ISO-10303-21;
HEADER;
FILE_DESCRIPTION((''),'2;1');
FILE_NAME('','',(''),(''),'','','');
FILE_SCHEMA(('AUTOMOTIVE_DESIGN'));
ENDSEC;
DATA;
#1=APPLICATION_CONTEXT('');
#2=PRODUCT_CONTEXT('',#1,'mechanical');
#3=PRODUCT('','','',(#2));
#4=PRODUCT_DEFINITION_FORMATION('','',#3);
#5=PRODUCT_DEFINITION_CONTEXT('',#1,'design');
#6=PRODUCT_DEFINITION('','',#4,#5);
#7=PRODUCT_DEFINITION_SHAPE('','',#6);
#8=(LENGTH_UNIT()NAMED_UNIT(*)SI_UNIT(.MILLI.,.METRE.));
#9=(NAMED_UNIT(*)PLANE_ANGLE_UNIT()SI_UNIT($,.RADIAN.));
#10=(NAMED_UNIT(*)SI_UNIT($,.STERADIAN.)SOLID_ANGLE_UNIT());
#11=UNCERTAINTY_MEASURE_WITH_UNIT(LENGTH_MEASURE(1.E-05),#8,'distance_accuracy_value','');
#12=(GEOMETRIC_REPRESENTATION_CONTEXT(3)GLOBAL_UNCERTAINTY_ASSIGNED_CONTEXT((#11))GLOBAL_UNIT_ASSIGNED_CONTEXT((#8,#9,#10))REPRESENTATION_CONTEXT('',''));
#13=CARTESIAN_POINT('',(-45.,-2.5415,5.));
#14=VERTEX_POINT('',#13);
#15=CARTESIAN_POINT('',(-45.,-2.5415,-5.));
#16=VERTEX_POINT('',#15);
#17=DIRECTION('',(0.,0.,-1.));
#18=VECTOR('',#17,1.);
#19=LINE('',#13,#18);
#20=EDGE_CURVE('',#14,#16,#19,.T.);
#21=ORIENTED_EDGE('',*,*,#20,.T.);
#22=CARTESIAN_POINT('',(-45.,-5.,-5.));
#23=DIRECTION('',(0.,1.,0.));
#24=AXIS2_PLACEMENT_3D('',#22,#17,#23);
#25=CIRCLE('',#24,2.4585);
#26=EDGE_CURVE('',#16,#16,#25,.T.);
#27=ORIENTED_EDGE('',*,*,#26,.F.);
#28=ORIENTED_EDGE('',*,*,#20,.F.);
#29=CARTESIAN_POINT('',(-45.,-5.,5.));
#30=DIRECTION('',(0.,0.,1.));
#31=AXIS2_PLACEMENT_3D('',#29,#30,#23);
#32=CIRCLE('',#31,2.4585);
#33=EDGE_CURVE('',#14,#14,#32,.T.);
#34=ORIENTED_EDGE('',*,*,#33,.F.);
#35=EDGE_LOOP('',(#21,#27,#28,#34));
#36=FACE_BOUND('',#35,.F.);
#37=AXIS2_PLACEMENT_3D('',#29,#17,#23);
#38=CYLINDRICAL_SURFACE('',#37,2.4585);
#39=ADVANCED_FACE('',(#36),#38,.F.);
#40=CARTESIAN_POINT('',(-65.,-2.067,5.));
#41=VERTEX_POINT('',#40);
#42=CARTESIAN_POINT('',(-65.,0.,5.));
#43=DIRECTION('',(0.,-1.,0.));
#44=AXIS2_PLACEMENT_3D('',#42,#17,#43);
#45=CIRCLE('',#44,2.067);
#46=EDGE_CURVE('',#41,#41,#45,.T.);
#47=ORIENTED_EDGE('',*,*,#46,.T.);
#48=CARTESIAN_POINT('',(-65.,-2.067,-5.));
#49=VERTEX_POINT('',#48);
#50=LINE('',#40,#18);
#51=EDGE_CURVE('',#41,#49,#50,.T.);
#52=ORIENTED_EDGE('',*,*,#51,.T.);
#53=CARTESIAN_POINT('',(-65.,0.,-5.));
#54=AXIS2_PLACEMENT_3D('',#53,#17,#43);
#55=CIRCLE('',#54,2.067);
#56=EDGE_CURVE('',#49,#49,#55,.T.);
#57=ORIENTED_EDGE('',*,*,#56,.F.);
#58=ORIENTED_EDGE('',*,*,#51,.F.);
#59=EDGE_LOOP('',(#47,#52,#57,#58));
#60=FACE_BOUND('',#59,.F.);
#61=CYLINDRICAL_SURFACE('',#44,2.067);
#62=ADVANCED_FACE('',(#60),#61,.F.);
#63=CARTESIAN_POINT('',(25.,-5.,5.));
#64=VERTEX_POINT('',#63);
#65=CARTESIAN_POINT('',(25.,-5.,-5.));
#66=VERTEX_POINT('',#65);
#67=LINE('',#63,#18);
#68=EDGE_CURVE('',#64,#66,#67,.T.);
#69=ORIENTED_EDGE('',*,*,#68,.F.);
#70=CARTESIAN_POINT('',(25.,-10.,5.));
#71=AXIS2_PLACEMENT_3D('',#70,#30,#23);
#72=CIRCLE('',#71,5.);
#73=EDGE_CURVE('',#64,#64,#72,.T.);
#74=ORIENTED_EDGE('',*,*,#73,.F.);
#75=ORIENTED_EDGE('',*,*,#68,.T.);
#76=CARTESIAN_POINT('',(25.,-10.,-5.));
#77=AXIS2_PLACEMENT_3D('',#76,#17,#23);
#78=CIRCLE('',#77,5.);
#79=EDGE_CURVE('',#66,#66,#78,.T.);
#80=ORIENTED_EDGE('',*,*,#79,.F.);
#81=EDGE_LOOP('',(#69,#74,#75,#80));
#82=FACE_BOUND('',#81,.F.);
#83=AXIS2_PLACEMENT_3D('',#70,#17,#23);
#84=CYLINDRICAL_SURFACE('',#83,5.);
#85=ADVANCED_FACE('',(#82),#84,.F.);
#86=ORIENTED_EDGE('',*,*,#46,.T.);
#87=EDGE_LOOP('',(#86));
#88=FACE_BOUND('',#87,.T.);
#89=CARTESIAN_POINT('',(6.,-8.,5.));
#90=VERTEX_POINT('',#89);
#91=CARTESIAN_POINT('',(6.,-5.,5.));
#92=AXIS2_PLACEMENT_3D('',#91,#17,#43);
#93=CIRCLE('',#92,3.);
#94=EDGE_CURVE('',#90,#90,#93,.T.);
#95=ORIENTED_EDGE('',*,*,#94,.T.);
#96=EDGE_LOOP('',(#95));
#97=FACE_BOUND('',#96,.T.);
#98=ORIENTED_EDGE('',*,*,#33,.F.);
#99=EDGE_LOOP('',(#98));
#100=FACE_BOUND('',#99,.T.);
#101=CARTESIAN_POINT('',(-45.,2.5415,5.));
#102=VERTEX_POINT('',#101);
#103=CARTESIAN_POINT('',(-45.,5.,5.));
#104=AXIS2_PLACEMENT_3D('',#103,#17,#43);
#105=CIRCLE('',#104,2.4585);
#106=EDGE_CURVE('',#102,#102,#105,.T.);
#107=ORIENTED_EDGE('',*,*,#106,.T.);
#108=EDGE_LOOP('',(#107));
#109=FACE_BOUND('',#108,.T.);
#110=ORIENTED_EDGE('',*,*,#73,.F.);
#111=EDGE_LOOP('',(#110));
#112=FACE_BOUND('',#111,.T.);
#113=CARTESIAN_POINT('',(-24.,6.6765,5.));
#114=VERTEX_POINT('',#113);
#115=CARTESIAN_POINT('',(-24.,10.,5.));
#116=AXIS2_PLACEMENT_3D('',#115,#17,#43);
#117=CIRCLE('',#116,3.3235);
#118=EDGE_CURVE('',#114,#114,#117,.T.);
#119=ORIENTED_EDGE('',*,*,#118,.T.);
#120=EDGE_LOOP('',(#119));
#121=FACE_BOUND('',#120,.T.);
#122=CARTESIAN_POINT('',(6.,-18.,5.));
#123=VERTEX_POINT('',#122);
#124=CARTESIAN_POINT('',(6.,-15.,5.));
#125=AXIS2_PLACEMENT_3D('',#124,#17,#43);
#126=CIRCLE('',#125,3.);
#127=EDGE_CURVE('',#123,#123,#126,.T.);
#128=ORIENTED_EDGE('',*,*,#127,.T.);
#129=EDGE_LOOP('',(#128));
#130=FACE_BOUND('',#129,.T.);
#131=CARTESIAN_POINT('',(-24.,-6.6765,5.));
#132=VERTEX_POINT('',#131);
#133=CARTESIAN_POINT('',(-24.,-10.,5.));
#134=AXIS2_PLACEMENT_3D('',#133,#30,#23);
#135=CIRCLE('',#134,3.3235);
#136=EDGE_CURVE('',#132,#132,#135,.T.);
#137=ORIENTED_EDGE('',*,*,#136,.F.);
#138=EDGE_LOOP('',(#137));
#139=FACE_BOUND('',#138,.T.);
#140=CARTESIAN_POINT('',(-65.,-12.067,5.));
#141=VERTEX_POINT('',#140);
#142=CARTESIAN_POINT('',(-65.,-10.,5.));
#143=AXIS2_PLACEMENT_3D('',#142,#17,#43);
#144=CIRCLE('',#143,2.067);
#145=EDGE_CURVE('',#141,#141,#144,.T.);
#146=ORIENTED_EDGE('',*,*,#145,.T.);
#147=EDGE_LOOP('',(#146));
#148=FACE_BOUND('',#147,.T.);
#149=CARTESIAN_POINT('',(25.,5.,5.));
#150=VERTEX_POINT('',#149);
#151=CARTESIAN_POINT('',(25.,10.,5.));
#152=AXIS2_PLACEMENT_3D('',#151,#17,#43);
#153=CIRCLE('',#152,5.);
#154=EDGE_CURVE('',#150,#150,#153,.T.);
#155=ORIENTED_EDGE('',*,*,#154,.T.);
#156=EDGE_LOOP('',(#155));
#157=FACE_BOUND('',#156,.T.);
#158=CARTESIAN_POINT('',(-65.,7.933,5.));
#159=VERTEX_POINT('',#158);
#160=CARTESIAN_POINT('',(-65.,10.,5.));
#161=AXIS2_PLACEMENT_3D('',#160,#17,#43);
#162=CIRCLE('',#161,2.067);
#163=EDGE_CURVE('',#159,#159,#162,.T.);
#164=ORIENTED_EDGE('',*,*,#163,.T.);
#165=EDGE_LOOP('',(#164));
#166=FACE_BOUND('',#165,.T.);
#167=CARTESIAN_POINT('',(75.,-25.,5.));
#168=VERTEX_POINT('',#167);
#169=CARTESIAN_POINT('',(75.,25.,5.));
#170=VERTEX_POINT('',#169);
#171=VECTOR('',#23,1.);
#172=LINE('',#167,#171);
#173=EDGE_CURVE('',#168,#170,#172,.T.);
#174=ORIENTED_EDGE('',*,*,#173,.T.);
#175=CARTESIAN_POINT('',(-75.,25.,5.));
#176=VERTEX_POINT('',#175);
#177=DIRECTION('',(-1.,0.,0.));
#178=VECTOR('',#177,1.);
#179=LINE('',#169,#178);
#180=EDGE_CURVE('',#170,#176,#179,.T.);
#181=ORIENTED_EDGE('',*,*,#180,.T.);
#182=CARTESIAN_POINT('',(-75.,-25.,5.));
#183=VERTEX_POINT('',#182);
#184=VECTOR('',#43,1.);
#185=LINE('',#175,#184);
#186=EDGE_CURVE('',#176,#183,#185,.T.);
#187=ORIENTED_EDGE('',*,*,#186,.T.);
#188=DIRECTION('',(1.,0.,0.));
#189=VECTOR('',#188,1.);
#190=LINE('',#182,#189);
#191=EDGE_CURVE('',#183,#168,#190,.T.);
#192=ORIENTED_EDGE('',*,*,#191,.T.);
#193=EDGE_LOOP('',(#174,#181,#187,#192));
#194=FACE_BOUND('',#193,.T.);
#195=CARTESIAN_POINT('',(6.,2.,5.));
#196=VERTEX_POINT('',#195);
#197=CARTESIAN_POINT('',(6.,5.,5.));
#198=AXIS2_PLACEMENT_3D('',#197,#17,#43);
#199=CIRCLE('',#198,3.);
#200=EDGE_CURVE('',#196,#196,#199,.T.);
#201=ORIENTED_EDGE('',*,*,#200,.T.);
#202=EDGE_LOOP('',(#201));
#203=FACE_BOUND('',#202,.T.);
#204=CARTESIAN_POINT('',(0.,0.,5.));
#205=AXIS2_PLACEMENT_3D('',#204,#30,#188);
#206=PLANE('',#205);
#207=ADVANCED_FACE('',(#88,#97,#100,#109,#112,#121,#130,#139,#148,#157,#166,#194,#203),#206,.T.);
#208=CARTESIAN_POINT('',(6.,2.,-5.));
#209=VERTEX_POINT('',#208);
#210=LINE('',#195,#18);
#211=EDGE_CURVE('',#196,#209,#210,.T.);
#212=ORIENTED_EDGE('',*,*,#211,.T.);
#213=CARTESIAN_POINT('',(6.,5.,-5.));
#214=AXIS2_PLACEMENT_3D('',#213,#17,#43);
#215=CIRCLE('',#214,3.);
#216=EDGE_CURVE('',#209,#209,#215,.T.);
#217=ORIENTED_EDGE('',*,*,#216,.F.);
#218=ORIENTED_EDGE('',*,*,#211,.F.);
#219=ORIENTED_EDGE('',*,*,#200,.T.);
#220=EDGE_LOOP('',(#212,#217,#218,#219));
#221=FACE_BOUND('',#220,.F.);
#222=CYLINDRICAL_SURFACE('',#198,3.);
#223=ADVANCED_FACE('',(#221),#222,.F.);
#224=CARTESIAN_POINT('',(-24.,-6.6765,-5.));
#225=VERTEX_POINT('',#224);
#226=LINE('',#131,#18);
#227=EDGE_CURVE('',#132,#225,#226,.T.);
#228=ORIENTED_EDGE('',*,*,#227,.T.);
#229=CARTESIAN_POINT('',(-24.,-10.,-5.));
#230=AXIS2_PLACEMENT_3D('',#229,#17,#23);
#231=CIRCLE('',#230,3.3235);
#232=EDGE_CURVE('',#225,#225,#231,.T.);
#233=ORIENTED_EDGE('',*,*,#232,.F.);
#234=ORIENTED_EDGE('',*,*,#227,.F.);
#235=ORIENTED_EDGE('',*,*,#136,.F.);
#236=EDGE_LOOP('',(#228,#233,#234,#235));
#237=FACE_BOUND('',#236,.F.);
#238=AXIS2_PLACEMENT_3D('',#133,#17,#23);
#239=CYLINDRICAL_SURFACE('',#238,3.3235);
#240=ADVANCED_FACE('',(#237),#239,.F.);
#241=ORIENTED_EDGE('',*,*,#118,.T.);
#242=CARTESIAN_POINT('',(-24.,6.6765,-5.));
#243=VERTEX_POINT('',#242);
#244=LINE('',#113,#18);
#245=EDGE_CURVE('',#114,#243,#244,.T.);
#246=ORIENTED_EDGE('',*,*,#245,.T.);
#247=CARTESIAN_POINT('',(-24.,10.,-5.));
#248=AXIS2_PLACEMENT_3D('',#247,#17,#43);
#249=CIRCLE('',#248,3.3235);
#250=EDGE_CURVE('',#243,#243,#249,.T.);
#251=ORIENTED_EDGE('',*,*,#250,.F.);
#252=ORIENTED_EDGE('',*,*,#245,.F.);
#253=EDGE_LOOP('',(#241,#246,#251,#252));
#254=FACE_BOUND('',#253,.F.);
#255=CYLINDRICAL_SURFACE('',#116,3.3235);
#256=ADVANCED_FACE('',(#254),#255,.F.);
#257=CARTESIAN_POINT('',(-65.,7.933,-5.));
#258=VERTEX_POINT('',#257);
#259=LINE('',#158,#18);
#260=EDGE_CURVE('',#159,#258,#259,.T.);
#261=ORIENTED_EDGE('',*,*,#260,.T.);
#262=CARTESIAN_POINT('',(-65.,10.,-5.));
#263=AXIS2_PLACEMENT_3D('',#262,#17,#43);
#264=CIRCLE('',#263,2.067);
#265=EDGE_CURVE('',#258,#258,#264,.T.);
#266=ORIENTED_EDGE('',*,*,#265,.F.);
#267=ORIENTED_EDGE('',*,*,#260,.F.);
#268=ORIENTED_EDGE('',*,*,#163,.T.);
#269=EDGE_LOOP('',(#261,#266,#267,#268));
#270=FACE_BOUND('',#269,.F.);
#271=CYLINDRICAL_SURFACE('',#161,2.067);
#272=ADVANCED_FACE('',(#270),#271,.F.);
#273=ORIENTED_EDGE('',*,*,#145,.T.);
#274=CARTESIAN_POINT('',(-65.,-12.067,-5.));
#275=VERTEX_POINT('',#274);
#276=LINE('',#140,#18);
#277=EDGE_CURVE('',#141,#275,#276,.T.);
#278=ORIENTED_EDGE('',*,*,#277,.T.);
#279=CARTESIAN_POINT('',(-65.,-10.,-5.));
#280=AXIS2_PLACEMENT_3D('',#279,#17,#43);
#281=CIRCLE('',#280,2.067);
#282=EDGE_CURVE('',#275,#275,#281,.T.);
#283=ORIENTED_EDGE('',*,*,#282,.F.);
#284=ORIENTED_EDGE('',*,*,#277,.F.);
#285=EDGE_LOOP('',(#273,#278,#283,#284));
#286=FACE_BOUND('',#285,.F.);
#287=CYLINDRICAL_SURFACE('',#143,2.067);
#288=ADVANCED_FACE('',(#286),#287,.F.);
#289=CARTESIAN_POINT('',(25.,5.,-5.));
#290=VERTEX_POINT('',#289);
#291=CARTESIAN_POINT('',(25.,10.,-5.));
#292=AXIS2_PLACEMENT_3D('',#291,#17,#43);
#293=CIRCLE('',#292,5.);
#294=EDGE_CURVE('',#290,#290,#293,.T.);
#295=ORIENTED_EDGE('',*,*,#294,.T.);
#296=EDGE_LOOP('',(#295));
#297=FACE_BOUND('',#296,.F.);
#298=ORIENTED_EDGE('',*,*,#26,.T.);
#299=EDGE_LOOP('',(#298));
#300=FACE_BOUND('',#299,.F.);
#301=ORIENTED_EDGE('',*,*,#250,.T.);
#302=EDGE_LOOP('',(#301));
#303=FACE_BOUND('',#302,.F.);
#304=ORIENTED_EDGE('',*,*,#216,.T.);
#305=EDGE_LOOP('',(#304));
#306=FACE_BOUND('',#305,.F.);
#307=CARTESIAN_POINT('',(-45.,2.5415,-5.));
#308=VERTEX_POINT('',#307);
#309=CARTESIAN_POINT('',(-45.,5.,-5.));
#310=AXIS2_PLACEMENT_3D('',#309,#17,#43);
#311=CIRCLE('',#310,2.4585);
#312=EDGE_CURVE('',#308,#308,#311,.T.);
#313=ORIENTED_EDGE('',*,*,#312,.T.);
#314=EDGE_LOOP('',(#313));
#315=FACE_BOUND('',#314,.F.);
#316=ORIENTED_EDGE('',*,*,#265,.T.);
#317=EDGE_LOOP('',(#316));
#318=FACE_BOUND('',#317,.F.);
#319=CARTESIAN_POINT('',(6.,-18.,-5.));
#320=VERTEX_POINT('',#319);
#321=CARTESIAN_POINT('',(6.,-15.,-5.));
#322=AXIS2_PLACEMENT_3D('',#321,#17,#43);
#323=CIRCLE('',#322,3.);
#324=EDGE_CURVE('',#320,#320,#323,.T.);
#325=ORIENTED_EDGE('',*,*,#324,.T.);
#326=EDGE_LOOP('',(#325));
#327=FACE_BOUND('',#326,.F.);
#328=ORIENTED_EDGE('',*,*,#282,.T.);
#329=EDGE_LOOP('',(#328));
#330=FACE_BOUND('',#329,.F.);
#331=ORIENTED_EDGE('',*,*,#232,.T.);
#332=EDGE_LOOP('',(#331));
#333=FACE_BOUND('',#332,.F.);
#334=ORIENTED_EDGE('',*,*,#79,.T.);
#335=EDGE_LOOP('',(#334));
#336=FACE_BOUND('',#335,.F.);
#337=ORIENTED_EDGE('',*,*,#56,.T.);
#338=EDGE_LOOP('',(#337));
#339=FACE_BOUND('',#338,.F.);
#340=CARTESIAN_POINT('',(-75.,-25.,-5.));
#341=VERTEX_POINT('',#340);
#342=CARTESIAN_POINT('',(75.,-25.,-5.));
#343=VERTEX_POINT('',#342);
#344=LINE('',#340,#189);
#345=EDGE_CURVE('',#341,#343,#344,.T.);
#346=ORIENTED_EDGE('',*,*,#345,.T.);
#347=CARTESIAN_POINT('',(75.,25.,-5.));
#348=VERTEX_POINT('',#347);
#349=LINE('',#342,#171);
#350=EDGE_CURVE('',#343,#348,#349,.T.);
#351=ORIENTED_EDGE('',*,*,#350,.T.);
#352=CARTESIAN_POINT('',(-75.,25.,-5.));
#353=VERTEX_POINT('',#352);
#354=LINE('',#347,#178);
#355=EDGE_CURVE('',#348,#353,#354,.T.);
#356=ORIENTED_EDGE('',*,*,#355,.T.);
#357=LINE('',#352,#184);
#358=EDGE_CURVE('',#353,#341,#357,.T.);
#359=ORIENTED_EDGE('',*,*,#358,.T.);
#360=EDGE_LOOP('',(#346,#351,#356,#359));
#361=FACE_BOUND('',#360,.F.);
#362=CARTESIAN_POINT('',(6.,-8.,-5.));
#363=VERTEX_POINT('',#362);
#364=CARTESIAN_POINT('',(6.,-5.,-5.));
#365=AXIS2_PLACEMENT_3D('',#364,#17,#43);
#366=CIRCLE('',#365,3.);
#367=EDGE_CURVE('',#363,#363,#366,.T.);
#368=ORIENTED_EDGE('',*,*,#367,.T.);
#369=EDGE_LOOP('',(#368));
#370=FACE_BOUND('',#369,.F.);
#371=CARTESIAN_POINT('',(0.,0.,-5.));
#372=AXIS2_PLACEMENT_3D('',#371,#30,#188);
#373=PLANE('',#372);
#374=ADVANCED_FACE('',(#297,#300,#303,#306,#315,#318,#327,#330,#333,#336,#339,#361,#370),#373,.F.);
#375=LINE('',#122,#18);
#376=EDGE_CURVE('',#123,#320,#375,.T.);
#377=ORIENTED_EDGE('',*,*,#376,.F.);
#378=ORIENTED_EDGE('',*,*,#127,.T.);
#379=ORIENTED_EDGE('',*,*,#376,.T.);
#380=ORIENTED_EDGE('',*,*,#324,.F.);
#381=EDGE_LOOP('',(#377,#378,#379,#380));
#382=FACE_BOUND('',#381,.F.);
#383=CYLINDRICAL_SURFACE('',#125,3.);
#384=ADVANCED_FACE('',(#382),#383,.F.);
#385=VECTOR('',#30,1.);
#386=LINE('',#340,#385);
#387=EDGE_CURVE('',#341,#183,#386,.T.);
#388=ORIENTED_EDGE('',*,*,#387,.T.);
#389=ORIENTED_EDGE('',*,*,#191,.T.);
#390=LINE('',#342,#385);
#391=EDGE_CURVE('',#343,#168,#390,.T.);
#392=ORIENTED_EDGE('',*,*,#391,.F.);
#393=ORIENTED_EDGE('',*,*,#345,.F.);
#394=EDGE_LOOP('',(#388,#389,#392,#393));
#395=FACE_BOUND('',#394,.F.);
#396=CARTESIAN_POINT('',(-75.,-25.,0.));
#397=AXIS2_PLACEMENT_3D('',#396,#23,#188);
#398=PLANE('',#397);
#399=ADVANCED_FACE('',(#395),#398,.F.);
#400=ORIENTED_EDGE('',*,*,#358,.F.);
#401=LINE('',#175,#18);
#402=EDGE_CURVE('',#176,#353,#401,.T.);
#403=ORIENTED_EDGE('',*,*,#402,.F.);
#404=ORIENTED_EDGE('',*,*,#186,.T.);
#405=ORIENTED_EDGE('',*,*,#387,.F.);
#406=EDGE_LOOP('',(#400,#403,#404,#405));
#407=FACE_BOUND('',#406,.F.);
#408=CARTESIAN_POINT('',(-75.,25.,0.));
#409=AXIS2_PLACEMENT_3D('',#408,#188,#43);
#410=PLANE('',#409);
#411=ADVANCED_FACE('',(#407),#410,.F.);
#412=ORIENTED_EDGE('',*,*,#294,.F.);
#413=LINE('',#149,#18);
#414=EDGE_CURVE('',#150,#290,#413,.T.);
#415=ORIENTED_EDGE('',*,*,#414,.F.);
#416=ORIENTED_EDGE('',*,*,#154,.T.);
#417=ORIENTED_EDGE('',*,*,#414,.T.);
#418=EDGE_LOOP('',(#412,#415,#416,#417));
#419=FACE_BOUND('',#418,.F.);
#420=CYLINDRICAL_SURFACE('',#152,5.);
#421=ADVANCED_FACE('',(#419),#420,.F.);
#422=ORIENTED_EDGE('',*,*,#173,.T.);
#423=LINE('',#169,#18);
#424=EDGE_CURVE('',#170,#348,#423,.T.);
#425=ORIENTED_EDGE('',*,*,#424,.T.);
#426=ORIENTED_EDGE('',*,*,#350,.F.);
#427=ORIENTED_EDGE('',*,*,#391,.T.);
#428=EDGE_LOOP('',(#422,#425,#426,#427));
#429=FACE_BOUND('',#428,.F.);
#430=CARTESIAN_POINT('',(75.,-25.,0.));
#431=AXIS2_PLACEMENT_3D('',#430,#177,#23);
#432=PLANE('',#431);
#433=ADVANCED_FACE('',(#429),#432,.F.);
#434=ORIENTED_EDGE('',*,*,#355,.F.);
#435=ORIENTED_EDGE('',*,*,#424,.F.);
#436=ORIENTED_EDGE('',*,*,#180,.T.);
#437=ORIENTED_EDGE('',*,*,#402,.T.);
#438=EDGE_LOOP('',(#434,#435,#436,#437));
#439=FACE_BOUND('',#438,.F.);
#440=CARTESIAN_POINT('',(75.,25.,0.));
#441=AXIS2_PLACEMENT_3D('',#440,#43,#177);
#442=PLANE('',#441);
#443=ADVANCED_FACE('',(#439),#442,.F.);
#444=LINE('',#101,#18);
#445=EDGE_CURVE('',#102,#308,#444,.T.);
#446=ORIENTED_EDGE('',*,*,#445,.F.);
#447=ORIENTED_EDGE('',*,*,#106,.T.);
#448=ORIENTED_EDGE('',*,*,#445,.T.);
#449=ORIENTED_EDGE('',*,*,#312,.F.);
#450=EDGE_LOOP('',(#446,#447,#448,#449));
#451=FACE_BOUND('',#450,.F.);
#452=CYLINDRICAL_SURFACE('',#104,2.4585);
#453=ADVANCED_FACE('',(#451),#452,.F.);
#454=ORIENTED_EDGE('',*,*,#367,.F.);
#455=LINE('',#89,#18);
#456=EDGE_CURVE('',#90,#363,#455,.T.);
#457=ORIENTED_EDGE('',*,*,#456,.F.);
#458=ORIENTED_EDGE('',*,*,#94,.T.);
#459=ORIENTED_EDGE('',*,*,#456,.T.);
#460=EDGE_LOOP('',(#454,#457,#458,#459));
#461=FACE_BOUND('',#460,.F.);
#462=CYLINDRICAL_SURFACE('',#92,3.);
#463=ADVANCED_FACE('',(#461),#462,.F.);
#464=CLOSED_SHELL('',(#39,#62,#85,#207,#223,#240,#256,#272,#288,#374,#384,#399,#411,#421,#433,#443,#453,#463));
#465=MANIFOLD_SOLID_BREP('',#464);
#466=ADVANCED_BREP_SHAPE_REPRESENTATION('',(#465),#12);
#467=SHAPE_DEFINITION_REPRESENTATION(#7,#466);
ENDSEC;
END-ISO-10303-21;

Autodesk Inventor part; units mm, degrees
ref_plane "YZ Plane" through (0, 0, 0) normal (1, 0, 0) x (0, 1, 0)
ref_plane "XZ Plane" through (0, 0, 0) normal (0, 1, 0) x (-1, 0, 0)
ref_plane "XY Plane" through (0, 0, 0) normal (0, 0, 1) x (1, 0, 0)
sketch "Sketch2" plane through (0, 0, 0) normal (0, 0, 1) x (1, 0, 0)
  line L0 (-75, -25) -> (75, -25)
  line L1 (75, -25) -> (75, 25)
  line L2 (75, 25) -> (-75, 25)
  line L3 (-75, 25) -> (-75, -25)
  line L4 (-75, -25) -> (75, 25) construction
  line L5 (75, -25) -> (-75, 25) construction
  point P0 (0, 0)
  dimension "d1" = 150
  dimension "d2" = 50
extrude "Extrusion1" add sketch "Sketch2" along normal mid plane 10
sketch "Sketch3" plane through (0, 0, 5) normal (0, 0, 1) x (1, 0, 0)
  line L0 (-75, 25) -> (-75, -25) projected
  line L1 (75, 25) -> (-75, 25) projected
  point P0 (0, 0)
  point P1 (-65, 0)
  dimension "d40" = 10
  dimension "d43" = 25
hole "Hole1" at (-65, 0, 5) direction (0, 0, -1) diameter 4.134 depth 14.2 tip angle 118 thread size "M5x0.8" class "6H" standard "TS profile"
sketch "Sketch4" plane through (0, 0, 5) normal (0, 0, 1) x (1, 0, 0)
  line L0 (-75, 25) -> (-75, -25) projected
  line L1 (75, 25) -> (-75, 25) projected
  point P0 (0, 0)
  point P1 (-45, 5)
  dimension "d41" = 30
  dimension "d42" = 20
hole "Hole2" at (-45, 5, 5) direction (0, 0, -1) diameter 4.917 depth 17.1 tip angle 118 thread size "M6x1" class "6H" standard "TS profile"
sketch "Sketch5" plane through (0, 0, 5) normal (0, 0, 1) x (1, 0, 0)
  line L0 (-75, 25) -> (-75, -25) projected
  line L1 (75, 25) -> (-75, 25) projected
  point P0 (0, 0)
  point P1 (-24, 10)
  dimension "d44" = 51
  dimension "d45" = 15
hole "Hole3" at (-24, 10, 5) direction (0, 0, -1) diameter 6.647 depth 22.2 tip angle 118 thread size "M8x1.25" class "6H" standard "TS profile"
sketch "Sketch6" plane through (0, 0, 5) normal (0, 0, 1) x (1, 0, 0)
  line L0 (-75, 25) -> (-75, -25) projected
  line L1 (75, 25) -> (-75, 25) projected
  point P0 (0, 0)
  point P1 (6, 5)
  dimension "d46" = 81
  dimension "d47" = 20
hole "Hole4" at (6, 5, 5) direction (0, 0, -1) diameter 6 depth 14.2 tip angle 118
sketch "Sketch7" plane through (0, 0, 5) normal (0, 0, 1) x (1, 0, 0)
  line L0 (-75, 25) -> (-75, -25) projected
  line L1 (75, 25) -> (-75, 25) projected
  point P0 (0, 0)
  point P1 (25, 10)
  dimension "d48" = 100
  dimension "d49" = 15
hole "Hole5" at (25, 10, 5) direction (0, 0, -1) diameter 10 depth 14.2 tip angle 118
pattern_linear "Rectangular Pattern1" count 3 spacing 10 along (0, -1, 0) of "Hole1" first direction both ways yes
mirror "Mirror1" about plane through (0, 0, 0) normal (0, 1, 0) of "Hole2"
mirror "Mirror2" about plane through (0, 0, 0) normal (0, 1, 0) of "Hole3"
pattern_linear "Rectangular Pattern2" count 3 spacing 10 along (0, -1, 0) of "Hole4"
mirror "Mirror3" about plane through (0, 0, 0) normal (0, 1, 0) of "Hole5"
properties part number "홀간 거리 확인 파트-3" material "SS400"
